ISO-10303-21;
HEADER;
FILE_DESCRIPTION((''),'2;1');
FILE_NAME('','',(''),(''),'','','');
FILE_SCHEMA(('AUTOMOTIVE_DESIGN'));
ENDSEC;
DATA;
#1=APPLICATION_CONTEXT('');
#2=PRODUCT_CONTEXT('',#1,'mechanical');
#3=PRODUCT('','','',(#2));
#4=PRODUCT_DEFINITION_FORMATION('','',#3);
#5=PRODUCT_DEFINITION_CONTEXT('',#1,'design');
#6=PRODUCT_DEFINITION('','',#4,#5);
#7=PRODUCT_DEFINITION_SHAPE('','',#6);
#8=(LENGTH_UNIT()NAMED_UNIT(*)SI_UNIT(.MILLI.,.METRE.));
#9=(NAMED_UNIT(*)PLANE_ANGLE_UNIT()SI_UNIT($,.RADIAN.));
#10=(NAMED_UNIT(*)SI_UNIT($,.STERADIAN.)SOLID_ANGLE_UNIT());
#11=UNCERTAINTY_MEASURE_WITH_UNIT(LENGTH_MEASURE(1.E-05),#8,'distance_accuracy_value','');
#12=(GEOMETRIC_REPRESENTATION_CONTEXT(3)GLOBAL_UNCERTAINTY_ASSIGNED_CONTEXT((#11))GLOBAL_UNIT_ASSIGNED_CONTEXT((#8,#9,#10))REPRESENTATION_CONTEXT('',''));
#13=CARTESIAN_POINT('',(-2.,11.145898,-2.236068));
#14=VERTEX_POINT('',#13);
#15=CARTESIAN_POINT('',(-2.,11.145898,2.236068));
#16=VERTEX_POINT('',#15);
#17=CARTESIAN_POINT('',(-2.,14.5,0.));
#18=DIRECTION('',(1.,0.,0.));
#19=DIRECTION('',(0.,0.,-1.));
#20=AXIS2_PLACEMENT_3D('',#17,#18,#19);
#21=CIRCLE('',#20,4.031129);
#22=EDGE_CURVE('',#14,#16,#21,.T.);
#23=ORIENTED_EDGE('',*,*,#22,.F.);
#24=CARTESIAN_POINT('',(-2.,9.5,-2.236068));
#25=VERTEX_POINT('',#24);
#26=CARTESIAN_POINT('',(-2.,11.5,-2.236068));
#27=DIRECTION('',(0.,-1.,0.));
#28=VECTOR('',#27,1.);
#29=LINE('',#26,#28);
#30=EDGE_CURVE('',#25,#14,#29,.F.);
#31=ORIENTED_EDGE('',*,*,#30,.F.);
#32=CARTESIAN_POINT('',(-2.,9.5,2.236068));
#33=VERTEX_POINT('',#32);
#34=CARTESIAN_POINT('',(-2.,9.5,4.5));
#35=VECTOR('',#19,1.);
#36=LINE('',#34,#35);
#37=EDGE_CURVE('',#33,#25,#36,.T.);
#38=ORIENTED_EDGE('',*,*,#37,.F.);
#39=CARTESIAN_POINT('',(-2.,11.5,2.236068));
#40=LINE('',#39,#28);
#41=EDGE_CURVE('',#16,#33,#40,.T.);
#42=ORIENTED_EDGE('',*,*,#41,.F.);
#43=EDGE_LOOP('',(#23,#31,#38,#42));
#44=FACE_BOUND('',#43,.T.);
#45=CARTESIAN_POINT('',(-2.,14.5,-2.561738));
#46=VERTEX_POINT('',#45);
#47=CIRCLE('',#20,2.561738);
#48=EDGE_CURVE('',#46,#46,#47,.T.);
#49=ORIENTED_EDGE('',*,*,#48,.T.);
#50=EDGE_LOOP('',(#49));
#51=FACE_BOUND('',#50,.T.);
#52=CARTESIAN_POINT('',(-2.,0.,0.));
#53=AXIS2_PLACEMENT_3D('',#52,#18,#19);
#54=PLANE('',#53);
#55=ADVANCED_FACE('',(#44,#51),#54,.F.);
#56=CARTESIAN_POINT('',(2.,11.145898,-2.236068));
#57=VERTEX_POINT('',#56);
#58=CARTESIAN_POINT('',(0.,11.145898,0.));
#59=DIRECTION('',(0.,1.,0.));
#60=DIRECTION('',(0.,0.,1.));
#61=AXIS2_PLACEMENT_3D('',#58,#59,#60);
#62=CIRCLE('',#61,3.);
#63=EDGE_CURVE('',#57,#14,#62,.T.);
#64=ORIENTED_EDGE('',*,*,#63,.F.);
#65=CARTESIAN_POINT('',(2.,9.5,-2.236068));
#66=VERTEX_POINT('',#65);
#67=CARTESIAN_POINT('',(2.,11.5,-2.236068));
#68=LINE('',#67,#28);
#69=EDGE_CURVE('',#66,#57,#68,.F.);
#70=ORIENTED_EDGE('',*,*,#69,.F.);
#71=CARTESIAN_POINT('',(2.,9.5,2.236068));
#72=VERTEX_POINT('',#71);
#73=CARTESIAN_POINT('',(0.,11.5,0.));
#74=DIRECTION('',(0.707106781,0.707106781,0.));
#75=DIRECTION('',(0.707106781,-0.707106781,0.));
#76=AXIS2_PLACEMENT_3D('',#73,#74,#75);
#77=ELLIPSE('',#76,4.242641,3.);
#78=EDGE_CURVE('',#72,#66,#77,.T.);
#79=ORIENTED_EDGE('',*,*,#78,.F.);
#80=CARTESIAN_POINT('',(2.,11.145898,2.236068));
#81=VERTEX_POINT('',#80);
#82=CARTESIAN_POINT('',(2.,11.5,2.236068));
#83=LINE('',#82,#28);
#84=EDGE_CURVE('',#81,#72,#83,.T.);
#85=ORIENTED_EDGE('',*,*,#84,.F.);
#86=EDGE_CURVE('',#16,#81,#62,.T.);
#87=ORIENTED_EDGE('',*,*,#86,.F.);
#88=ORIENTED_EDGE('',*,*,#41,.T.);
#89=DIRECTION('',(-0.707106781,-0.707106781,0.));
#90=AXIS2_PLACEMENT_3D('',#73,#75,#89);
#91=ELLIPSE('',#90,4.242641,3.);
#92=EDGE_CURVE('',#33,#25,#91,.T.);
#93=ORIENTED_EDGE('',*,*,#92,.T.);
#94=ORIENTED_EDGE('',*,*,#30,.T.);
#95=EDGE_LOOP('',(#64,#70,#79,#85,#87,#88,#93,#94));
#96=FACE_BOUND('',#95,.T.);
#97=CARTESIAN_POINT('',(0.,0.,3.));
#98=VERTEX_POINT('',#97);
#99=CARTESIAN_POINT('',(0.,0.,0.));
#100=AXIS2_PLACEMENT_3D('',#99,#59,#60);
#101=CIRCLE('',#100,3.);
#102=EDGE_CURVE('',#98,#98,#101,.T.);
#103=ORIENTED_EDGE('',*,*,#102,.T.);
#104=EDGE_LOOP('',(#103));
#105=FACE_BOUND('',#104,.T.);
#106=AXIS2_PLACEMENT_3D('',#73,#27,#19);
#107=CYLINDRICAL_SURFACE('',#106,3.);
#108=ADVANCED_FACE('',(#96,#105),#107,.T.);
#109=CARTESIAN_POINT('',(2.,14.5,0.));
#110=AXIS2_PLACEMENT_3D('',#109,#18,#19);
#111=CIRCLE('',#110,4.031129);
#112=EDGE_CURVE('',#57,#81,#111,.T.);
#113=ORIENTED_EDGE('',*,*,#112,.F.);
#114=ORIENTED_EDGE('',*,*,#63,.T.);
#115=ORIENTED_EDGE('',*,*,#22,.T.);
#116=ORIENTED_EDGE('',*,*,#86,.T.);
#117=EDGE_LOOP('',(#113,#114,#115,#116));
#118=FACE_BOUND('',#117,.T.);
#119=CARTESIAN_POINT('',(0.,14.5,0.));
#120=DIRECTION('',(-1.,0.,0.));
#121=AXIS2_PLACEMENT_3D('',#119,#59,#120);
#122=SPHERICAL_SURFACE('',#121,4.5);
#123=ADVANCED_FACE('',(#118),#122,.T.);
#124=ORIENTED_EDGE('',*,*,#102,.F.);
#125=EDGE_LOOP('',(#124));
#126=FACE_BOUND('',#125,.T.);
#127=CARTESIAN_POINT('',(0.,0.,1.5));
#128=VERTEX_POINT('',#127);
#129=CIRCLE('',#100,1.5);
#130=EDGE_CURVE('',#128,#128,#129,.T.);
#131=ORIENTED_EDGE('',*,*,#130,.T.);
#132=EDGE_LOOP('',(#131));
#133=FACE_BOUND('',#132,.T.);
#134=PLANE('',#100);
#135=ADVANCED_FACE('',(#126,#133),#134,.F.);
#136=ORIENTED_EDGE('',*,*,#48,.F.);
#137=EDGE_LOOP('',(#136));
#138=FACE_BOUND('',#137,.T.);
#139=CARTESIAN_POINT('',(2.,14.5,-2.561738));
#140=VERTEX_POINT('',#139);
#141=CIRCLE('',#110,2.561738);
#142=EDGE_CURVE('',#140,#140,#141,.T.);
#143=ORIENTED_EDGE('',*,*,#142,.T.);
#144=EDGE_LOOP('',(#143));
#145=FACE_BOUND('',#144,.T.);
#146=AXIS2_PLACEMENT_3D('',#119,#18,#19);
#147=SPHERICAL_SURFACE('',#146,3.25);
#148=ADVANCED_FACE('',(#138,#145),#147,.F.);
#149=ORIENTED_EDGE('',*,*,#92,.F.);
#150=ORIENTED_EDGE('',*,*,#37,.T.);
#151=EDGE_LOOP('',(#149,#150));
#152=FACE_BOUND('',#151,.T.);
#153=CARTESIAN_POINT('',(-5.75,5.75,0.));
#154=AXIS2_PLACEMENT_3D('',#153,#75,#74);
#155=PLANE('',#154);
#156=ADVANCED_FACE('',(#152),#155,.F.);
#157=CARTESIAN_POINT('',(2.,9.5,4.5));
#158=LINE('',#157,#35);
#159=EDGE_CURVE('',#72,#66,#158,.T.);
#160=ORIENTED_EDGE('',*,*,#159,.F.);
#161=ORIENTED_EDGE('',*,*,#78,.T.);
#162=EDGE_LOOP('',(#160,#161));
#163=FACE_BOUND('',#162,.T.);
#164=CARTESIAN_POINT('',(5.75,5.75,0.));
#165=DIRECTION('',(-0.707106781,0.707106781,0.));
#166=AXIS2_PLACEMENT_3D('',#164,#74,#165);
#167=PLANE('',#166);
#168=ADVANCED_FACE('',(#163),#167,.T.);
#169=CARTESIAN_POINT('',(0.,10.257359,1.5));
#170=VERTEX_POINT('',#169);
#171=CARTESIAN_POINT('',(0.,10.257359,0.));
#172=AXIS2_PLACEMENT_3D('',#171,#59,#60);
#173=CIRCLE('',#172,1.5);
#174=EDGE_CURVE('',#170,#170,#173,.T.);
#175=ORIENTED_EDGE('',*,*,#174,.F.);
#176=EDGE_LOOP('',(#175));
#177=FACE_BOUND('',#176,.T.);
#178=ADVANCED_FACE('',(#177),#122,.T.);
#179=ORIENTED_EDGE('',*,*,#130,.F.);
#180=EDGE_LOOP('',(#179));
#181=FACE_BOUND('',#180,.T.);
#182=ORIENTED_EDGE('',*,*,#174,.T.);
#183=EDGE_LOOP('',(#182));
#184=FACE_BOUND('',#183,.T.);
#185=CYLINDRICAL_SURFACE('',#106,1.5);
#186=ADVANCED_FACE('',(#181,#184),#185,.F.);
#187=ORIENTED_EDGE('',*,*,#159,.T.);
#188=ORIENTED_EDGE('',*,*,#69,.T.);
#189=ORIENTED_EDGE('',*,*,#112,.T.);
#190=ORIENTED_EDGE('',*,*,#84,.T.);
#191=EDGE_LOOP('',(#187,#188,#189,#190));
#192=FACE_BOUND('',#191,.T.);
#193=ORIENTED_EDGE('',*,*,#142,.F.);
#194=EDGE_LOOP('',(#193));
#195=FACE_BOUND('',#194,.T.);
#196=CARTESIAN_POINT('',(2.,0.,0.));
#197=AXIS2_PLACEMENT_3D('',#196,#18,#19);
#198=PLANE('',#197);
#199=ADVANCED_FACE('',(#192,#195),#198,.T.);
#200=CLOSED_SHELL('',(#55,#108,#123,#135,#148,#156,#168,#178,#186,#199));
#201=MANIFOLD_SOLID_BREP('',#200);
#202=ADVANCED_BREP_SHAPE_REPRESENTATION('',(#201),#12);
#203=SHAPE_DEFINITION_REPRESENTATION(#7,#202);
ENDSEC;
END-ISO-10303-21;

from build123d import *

# Parameters (mm, degrees)
SKETCH1_R           = 3
SKETCH1_R_2         = 1.5
BOSS_EXTRUDE1_DEPTH = 11.5
SKETCH3_W           = 9
SKETCH3_H           = 9.5
CUT_EXTRUDE1_DEPTH  = 10
SKETCH4_W           = 9
SKETCH4_H           = 9.5
CUT_EXTRUDE2_DEPTH  = 10
SKETCH5_W           = 2
SKETCH5_H           = 4.472135954
CUT_EXTRUDE3_DEPTH  = 10
SKETCH6_W           = 2
SKETCH6_H           = 4.472135954
CUT_EXTRUDE4_DEPTH  = 10


# Read off the part's stored shape, not the designer's step: Revolve13
with BuildPart() as part:
    # Sketch1 → Boss-Extrude1 (new body)
    with BuildSketch(Plane(origin=(0, 0, 0), x_dir=(1, 0, 0), z_dir=(0, 1, 0))):
        with Locations(Location((0, 0, 0), (0, 0, 270))):
            Circle(SKETCH1_R)
        with Locations(Location((0, 0, 0), (0, 0, 270))):
            Circle(SKETCH1_R_2, mode=Mode.SUBTRACT)
    extrude(amount=BOSS_EXTRUDE1_DEPTH)

    # Revolve13 outline → Revolve13 (revolve)
    with BuildSketch(Plane.XY):
        with BuildLine():
            ThreePointArc((2.999999997, 11.145898031), (4.203775616, 16.105699402), (0, 19))
            Line((0, 19), (0, 17.75))
            ThreePointArc((0, 17.75), (3.25, 14.5), (0, 11.25))
            Line((0, 11.25), (0, 10))
            ThreePointArc((0, 10), (0.760958906, 10.064806482), (1.500000004, 10.257359314))
            Line((1.500000004, 10.257359314), (1.5, 11.5))
            Line((1.5, 11.5), (3, 11.5))
            Line((3, 11.5), (2.999999997, 11.145898031))
        make_face()
    revolve(axis=Axis((0, 0, 0), (0, 1, 0)))

    # Sketch3 → Cut-Extrude1 (cut)
    with BuildSketch(Plane(origin=(2, 0, 0), x_dir=(0, 0, -1), z_dir=(1, 0, 0))):
        with Locations((0, 14.25)):
            Rectangle(SKETCH3_W, SKETCH3_H)
    extrude(amount=CUT_EXTRUDE1_DEPTH, mode=Mode.SUBTRACT)

    # Sketch4 → Cut-Extrude2 (cut)
    with BuildSketch(Plane(origin=(-2, 0, 0), x_dir=(0, 0, -1), z_dir=(1, 0, 0))):
        with Locations((0, 14.25)):
            Rectangle(SKETCH4_W, SKETCH4_H)
    extrude(amount=-CUT_EXTRUDE2_DEPTH, mode=Mode.SUBTRACT)

    # Sketch5 → Cut-Extrude3 (cut)
    with BuildSketch(Plane(origin=(5.75, 5.75, 0), x_dir=(0.7071067811865477, -0.7071067811865475, 0), z_dir=(0.7071067811865475, 0.7071067811865477, 0))):
        with Locations((-4.303300859, 0)):
            Rectangle(SKETCH5_W, SKETCH5_H)
    extrude(amount=CUT_EXTRUDE3_DEPTH, mode=Mode.SUBTRACT)

    # Sketch6 → Cut-Extrude4 (cut)
    with BuildSketch(Plane(origin=(-5.75, 5.75, 0), x_dir=(0.7071067811865476, 0.7071067811865476, 0), z_dir=(-0.7071067811865476, 0.7071067811865476, 0))):
        with Locations((4.303300859, 0)):
            Rectangle(SKETCH6_W, SKETCH6_H)
    extrude(amount=CUT_EXTRUDE4_DEPTH, mode=Mode.SUBTRACT)


solid = part.part
